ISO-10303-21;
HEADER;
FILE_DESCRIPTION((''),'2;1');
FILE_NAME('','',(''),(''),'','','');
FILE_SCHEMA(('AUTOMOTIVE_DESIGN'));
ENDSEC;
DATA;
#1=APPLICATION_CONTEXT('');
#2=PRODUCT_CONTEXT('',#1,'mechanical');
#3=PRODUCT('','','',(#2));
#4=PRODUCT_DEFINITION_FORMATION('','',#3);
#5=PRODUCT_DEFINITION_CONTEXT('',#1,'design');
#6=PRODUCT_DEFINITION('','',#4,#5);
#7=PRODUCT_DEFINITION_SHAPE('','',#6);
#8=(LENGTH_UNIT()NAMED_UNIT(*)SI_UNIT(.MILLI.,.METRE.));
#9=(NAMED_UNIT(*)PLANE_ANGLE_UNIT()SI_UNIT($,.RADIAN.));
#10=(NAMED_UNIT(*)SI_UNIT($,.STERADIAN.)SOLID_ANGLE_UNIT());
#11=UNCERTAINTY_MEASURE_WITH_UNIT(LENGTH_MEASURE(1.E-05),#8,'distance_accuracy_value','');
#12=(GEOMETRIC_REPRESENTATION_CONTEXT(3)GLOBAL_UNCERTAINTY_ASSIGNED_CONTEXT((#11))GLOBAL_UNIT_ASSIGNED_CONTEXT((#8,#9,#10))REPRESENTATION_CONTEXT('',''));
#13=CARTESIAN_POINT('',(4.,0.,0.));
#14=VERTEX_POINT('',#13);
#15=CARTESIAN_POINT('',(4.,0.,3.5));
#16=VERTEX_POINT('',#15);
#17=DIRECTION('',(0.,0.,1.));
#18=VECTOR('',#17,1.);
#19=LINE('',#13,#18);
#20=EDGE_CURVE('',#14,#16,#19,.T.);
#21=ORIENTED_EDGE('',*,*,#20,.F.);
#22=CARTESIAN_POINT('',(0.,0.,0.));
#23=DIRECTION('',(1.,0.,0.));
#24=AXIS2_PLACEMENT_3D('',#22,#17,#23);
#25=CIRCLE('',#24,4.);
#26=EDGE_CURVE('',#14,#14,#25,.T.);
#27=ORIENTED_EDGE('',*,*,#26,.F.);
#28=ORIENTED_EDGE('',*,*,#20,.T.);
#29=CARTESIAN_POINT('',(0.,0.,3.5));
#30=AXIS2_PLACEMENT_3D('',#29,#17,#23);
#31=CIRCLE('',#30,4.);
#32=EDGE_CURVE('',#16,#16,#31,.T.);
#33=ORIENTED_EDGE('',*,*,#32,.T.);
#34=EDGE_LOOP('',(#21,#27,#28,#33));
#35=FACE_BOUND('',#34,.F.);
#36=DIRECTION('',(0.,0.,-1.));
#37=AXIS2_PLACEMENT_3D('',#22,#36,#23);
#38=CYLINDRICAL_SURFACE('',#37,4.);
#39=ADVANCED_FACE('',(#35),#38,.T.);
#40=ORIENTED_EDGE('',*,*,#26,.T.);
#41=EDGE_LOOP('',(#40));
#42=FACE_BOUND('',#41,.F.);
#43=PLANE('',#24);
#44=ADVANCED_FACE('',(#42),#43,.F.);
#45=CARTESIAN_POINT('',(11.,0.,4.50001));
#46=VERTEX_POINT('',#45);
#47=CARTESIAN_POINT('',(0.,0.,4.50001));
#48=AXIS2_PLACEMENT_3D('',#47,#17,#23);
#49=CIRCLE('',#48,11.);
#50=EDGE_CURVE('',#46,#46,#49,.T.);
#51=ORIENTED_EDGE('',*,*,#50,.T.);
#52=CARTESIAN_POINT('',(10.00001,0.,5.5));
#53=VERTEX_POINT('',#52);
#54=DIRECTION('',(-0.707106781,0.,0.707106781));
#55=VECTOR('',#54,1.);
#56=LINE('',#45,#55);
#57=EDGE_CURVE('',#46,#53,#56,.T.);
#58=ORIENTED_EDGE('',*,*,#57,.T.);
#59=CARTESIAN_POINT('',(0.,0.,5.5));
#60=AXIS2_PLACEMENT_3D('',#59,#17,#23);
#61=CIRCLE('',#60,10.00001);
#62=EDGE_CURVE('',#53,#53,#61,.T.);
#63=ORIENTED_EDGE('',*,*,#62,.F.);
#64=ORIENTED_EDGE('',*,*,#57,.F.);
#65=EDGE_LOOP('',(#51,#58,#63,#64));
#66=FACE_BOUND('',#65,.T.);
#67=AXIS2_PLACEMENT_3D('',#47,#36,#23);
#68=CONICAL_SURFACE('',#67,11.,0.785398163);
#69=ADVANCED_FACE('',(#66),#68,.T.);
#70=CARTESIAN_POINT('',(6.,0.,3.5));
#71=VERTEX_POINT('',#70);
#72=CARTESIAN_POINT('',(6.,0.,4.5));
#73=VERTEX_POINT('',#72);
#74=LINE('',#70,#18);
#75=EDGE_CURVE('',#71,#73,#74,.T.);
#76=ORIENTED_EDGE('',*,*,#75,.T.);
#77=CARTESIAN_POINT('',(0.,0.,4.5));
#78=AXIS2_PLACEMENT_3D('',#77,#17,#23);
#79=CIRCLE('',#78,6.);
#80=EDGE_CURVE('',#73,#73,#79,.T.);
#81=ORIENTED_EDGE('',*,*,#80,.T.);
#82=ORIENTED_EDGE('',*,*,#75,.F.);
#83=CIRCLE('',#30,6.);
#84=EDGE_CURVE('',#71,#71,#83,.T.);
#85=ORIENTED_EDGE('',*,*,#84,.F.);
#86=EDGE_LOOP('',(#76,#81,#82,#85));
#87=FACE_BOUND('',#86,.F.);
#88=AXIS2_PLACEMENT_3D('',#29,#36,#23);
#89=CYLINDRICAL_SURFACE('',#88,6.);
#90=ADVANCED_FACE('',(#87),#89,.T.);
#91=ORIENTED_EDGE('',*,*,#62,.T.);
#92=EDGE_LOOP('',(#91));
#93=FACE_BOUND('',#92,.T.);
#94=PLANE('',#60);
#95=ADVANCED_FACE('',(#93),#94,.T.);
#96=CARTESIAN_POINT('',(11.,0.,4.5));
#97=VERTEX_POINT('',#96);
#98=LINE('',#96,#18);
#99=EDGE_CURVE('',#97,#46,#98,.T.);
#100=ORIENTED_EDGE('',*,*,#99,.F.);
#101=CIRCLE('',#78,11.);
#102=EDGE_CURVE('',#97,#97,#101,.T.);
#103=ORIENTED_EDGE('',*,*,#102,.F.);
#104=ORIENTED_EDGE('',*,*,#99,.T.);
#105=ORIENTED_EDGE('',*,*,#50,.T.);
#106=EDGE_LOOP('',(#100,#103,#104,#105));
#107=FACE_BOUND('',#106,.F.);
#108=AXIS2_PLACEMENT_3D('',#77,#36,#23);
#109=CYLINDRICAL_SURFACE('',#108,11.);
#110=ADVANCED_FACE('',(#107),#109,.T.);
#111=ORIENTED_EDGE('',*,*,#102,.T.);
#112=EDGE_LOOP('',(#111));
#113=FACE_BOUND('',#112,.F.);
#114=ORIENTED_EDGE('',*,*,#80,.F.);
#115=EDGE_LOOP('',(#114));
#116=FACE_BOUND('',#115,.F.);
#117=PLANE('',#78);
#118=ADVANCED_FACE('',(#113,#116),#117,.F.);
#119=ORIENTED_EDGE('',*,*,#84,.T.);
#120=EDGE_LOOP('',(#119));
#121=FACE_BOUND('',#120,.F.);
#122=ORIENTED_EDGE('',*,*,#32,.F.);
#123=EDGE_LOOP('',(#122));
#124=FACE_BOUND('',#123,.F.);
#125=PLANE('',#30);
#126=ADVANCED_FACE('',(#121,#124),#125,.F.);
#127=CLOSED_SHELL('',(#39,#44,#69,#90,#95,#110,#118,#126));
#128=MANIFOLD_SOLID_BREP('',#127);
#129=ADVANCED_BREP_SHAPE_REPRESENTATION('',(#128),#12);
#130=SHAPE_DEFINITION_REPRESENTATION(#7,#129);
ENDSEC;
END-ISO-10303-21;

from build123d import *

# Parameters (mm, degrees)
F0_R     = 4
F1_DEPTH = 3.5
F2_R     = 6
F3_DEPTH = 1
F4_R     = 11
F5_DEPTH = 1
F7_SIZE  = 0.99999


# Not quite as in the source:
# - a fillet or chamfer is up to 0.001 mm smaller than in the source, because OpenCascade refuses the exact size


with BuildPart() as f1:
    # F0 (on Top) → F1 (new body)
    with BuildSketch(Plane.XY):
        Circle(F0_R)
    extrude(amount=F1_DEPTH)

    # F2 (on face) → F3 (join)
    with BuildSketch(Plane.XY.offset(3.5)):
        Circle(F2_R)
    extrude(amount=F3_DEPTH)

    # F4 (on face) → F5 (join)
    with BuildSketch(Plane.XY.offset(4.5)):
        Circle(F4_R)
    extrude(amount=F5_DEPTH)

    # F7 (size 1 in the source; OpenCascade refuses exactly that, so slightly less here)
    f7_edges = [f1.edges().sort_by_distance(p)[0] for p in [
        (-11, 0, 5.5),
    ]]
    chamfer(f7_edges, length=F7_SIZE)


solid = f1.part
